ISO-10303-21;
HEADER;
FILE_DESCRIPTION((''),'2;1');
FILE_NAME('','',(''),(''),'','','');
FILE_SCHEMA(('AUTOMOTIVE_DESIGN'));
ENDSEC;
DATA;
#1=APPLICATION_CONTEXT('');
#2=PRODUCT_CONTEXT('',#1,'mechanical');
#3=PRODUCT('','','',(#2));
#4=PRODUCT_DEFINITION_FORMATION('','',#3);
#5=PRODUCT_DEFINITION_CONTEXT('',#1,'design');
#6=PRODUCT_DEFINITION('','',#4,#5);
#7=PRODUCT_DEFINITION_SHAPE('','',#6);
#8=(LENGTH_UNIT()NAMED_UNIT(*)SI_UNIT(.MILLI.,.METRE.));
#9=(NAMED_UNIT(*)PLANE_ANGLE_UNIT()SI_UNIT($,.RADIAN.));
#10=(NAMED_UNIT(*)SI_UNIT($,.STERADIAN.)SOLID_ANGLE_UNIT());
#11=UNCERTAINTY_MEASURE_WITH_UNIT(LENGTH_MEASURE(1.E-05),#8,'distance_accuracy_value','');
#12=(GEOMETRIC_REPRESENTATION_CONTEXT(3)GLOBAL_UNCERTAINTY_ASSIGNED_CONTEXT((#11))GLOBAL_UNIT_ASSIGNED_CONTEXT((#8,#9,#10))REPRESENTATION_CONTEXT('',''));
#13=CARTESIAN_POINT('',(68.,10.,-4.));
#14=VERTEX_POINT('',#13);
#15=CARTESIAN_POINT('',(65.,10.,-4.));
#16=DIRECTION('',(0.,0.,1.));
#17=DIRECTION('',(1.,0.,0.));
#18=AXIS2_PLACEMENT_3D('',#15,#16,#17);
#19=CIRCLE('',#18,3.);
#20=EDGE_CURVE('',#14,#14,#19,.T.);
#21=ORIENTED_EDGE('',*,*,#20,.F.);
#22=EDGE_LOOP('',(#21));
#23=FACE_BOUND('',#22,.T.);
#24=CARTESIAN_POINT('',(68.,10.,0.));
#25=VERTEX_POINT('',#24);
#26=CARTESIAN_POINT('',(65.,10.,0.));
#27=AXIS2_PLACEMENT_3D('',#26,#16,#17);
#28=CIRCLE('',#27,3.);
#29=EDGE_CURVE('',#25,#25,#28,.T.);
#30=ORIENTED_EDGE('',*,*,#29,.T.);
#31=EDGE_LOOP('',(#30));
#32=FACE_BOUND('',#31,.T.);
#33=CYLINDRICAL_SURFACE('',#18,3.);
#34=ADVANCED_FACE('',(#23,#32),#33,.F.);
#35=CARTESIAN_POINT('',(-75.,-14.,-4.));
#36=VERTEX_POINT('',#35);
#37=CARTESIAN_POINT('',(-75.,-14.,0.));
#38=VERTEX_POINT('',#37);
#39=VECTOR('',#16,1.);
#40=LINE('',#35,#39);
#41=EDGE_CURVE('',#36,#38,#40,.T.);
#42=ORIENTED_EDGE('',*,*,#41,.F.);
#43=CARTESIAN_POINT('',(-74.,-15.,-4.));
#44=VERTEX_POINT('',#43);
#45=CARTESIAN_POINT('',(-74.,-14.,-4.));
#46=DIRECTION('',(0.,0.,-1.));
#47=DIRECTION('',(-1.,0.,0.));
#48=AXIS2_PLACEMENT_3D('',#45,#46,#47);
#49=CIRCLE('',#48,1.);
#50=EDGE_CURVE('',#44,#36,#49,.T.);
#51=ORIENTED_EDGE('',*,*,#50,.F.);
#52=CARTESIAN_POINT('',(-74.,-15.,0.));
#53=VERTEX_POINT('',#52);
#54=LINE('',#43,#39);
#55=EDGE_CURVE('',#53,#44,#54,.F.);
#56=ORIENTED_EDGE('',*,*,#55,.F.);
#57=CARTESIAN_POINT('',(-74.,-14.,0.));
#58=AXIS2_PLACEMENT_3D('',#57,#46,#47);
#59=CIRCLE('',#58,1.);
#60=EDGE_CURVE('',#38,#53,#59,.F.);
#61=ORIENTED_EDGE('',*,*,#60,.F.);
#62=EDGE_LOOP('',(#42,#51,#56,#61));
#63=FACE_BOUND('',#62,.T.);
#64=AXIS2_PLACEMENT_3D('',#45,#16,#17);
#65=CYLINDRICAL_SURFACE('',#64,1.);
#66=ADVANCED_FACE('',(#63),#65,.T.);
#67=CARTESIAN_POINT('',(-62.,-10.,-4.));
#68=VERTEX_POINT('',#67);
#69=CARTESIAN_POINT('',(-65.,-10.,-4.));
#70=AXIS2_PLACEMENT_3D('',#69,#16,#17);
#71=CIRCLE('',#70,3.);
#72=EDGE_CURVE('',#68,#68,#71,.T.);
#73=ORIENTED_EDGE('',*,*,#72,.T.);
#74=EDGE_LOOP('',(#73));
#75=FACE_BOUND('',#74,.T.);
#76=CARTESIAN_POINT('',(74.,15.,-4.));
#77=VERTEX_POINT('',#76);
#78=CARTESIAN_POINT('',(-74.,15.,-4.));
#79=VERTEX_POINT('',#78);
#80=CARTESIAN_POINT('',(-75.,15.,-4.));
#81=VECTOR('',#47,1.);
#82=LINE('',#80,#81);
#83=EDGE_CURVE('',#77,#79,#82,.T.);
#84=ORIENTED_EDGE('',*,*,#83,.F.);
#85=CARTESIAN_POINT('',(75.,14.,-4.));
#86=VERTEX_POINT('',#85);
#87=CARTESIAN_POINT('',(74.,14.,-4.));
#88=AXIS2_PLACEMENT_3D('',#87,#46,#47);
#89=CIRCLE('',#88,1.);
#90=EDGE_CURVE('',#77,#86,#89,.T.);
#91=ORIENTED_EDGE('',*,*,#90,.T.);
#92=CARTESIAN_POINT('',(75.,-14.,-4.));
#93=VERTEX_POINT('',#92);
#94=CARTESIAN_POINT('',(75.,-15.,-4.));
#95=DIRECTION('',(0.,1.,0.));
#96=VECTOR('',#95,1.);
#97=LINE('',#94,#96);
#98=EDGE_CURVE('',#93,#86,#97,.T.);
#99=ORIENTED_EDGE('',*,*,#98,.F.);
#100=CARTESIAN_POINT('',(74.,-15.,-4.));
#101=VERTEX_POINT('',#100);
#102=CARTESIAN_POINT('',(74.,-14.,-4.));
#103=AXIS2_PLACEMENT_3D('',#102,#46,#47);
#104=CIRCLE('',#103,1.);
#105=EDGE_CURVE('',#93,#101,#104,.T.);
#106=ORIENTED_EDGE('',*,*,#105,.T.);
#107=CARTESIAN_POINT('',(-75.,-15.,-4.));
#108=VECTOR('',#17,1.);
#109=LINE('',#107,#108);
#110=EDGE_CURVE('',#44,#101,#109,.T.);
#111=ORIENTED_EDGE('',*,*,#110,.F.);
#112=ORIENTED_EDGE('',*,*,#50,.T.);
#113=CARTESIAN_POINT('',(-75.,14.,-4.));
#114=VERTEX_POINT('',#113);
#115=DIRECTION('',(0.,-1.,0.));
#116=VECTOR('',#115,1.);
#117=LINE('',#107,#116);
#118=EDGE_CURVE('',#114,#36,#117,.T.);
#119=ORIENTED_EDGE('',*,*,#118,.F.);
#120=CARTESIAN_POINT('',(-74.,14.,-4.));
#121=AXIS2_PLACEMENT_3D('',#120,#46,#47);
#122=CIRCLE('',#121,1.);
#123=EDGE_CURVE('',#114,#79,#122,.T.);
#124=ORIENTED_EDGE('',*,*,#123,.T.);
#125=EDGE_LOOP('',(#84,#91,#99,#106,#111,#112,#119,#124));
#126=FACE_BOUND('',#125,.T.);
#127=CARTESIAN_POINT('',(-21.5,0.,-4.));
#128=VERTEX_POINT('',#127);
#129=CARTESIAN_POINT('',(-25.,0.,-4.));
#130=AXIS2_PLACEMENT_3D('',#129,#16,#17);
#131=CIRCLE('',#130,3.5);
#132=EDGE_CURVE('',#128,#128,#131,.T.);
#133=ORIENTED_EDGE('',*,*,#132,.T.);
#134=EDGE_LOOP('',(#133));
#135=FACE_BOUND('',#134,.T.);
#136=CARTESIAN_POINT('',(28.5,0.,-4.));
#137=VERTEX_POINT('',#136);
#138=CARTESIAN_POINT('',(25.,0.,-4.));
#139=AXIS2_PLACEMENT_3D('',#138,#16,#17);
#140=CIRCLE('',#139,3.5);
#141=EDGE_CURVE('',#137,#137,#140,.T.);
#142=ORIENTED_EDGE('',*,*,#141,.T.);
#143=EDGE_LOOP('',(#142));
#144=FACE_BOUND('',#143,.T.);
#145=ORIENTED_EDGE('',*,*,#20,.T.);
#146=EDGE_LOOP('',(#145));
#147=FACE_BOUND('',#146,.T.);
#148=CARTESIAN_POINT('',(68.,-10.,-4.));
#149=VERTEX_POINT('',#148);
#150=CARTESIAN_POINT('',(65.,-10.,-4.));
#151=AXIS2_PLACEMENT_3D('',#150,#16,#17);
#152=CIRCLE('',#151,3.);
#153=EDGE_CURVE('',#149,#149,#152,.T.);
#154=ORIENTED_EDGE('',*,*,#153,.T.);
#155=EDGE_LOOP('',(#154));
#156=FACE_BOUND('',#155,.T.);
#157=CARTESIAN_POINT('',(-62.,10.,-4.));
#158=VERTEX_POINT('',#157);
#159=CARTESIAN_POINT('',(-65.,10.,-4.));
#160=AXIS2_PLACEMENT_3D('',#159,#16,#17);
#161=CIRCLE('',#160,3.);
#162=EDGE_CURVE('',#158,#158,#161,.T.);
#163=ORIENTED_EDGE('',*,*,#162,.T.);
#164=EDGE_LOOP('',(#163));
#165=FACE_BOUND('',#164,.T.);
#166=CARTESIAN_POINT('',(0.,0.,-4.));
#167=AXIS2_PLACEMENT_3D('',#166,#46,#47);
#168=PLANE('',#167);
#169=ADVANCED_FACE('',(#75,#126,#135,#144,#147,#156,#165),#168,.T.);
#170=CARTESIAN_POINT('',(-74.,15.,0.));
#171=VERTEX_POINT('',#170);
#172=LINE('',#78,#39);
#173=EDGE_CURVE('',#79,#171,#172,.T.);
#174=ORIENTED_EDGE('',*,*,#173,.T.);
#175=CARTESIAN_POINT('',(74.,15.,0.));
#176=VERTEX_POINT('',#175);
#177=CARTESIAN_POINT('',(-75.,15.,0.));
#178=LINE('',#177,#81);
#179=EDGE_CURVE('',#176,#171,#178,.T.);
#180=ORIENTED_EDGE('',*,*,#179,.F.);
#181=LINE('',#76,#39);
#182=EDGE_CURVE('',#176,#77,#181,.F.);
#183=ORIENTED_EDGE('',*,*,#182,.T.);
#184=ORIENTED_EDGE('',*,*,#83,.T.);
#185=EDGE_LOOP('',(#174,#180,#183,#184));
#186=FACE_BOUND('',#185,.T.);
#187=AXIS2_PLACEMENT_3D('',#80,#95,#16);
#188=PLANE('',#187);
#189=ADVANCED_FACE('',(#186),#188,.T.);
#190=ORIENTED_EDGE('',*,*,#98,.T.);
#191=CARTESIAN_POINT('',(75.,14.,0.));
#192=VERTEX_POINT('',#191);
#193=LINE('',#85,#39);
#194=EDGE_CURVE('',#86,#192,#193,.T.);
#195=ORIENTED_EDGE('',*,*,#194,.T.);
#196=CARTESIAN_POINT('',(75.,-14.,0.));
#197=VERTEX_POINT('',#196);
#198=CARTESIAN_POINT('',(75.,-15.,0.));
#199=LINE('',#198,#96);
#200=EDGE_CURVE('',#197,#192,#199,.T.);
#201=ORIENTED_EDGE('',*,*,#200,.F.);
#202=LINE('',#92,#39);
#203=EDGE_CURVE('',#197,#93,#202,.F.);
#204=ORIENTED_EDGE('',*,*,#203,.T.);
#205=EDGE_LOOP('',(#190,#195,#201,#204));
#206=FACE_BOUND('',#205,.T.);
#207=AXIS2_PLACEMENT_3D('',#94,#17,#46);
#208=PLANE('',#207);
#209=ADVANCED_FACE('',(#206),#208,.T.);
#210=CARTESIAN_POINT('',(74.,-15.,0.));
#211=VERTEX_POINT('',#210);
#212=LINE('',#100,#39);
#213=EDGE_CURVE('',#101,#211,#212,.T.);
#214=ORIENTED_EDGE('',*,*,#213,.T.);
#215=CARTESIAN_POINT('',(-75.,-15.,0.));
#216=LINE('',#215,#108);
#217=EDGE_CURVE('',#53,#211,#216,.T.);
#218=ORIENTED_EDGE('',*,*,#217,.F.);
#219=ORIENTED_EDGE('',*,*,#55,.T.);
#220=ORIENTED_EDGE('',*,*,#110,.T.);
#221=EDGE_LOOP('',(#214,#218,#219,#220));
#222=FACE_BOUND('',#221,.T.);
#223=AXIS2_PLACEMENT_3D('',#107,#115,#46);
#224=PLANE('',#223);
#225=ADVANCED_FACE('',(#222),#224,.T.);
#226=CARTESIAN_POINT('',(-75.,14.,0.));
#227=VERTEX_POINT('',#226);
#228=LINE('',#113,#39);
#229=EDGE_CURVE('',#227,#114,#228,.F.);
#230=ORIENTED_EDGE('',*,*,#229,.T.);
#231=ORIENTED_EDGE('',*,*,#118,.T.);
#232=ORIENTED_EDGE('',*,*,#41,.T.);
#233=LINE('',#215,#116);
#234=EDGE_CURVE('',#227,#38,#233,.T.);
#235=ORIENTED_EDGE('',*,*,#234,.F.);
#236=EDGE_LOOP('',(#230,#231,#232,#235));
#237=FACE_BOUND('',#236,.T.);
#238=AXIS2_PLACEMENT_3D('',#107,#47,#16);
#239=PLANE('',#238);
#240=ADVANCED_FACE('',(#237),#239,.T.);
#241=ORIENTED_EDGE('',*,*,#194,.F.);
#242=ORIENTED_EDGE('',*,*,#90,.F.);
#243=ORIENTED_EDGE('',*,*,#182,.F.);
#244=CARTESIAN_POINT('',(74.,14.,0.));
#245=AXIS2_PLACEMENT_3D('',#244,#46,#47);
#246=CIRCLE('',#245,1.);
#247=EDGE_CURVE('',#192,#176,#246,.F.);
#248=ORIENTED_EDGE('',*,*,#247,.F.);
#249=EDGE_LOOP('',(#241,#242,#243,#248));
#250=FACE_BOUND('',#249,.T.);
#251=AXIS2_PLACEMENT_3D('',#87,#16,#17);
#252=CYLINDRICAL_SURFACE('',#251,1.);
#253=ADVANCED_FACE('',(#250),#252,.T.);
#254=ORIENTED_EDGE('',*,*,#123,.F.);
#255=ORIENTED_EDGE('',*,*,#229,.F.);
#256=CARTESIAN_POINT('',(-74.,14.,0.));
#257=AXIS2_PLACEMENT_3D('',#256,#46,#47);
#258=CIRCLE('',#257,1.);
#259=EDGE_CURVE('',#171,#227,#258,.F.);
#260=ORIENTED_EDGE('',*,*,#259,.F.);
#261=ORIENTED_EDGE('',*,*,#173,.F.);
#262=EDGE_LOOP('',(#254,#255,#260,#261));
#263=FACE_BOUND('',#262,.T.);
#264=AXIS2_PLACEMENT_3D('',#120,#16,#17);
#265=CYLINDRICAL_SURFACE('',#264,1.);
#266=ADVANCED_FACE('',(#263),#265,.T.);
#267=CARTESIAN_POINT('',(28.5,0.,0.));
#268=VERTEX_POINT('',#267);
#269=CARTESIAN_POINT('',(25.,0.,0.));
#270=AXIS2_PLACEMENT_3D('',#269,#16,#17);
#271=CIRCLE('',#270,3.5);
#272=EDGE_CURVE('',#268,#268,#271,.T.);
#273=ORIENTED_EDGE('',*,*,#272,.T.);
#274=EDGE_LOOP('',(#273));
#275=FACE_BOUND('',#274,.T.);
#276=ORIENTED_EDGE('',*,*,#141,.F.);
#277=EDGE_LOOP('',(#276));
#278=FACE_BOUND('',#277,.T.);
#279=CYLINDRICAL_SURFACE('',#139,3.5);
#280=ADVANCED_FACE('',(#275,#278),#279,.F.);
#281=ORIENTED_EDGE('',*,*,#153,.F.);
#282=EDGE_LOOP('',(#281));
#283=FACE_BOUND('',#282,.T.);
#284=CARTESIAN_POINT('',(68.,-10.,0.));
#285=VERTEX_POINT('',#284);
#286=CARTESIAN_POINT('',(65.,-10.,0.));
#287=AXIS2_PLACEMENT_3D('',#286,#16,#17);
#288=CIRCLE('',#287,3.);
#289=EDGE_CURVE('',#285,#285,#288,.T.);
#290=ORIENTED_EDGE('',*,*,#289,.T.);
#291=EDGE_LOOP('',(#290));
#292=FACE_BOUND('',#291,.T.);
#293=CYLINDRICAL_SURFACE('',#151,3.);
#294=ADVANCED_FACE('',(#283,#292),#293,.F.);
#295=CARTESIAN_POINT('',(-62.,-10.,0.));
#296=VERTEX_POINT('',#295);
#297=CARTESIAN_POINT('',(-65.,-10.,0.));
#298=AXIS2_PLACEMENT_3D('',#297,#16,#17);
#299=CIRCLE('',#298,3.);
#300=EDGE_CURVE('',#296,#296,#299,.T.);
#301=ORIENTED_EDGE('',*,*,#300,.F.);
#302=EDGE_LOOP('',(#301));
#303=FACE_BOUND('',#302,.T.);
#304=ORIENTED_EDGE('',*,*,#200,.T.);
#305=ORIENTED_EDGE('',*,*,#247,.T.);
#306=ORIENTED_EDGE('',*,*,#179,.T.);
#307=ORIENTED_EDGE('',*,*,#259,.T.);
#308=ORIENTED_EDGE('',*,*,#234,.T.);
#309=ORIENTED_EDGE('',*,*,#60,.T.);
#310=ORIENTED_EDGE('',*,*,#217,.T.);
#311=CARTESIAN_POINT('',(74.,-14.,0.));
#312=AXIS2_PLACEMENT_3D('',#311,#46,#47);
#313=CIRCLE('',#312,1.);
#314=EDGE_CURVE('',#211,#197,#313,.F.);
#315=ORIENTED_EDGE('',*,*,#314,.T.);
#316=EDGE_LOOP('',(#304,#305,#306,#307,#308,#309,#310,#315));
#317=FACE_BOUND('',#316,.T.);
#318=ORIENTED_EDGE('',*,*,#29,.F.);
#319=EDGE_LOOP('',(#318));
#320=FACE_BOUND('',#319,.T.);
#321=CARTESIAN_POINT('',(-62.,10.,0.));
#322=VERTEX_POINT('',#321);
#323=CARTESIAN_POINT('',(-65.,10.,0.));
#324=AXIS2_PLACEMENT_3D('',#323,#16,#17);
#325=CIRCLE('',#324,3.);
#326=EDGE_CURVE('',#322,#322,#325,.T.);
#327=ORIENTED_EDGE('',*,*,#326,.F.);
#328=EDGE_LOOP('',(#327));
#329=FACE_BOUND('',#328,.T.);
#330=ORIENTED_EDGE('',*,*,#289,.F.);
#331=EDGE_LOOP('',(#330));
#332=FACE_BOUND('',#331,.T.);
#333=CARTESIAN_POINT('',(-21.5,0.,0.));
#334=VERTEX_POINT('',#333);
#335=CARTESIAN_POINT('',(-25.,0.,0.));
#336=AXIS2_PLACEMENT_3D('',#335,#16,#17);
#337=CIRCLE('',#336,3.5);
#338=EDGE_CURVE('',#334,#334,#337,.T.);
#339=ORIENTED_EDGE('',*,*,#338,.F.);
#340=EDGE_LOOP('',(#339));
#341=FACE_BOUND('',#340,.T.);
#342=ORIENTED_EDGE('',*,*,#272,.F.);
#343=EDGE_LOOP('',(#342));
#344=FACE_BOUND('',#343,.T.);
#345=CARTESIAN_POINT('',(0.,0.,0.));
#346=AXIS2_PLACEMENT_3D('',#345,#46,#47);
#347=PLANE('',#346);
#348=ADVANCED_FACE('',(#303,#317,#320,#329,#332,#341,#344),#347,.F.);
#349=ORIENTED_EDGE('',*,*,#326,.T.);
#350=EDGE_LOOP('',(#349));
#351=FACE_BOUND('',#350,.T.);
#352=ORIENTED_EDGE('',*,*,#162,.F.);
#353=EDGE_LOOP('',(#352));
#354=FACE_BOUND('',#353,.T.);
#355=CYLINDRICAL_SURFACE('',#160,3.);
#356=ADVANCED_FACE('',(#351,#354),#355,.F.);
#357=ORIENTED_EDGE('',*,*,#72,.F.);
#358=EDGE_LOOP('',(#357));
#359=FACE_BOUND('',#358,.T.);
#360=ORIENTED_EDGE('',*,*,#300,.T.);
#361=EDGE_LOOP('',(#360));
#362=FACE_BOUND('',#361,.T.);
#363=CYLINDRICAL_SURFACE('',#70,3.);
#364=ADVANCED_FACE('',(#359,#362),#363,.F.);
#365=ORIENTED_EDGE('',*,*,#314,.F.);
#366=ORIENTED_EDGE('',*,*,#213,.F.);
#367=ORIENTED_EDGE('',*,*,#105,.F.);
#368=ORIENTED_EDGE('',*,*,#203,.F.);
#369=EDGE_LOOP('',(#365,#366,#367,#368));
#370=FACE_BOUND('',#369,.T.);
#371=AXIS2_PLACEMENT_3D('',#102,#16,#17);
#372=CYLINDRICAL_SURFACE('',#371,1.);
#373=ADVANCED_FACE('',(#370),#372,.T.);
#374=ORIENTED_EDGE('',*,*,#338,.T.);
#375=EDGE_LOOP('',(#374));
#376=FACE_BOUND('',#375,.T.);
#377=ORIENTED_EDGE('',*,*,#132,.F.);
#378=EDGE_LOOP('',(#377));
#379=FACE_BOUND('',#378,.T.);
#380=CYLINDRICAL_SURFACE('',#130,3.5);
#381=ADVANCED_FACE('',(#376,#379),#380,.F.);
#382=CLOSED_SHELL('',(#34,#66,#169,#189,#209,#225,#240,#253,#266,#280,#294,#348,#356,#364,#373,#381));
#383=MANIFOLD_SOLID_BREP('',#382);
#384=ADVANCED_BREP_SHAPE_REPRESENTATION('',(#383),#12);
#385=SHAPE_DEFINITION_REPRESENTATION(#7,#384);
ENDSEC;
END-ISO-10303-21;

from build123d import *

# Parameters (mm, degrees)
SKETCH1_W          = 150
SKETCH1_H          = 30
SKETCH1_R          = 3.5
SKETCH1_R_2        = 3
BASE_FLANGE1_DEPTH = 4
FILLET1_R          = 1


# Sheet-metal steps are written as plain solids
with BuildPart() as part:
    # Sketch1 → Base-Flange1 (new body)
    with BuildSketch(Plane.XY):
        Rectangle(SKETCH1_W, SKETCH1_H)
        with Locations((25, 0)):
            Circle(SKETCH1_R, mode=Mode.SUBTRACT)
        with Locations((-25, 0)):
            Circle(SKETCH1_R, mode=Mode.SUBTRACT)
        with Locations((65, -10)):
            Circle(SKETCH1_R_2, mode=Mode.SUBTRACT)
        with Locations((65, 10)):
            Circle(SKETCH1_R_2, mode=Mode.SUBTRACT)
        with Locations((-65, -10)):
            Circle(SKETCH1_R_2, mode=Mode.SUBTRACT)
        with Locations((-65, 10)):
            Circle(SKETCH1_R_2, mode=Mode.SUBTRACT)
    extrude(amount=-BASE_FLANGE1_DEPTH)

    # Fillet1
    fillet1_edges = [part.edges().sort_by_distance(p)[0] for p in [
        (-75, 15, -2),
        (75, 15, -2),
        (75, -15, -2),
        (-75, -15, -2),
    ]]
    fillet(fillet1_edges, radius=FILLET1_R)


solid = part.part
